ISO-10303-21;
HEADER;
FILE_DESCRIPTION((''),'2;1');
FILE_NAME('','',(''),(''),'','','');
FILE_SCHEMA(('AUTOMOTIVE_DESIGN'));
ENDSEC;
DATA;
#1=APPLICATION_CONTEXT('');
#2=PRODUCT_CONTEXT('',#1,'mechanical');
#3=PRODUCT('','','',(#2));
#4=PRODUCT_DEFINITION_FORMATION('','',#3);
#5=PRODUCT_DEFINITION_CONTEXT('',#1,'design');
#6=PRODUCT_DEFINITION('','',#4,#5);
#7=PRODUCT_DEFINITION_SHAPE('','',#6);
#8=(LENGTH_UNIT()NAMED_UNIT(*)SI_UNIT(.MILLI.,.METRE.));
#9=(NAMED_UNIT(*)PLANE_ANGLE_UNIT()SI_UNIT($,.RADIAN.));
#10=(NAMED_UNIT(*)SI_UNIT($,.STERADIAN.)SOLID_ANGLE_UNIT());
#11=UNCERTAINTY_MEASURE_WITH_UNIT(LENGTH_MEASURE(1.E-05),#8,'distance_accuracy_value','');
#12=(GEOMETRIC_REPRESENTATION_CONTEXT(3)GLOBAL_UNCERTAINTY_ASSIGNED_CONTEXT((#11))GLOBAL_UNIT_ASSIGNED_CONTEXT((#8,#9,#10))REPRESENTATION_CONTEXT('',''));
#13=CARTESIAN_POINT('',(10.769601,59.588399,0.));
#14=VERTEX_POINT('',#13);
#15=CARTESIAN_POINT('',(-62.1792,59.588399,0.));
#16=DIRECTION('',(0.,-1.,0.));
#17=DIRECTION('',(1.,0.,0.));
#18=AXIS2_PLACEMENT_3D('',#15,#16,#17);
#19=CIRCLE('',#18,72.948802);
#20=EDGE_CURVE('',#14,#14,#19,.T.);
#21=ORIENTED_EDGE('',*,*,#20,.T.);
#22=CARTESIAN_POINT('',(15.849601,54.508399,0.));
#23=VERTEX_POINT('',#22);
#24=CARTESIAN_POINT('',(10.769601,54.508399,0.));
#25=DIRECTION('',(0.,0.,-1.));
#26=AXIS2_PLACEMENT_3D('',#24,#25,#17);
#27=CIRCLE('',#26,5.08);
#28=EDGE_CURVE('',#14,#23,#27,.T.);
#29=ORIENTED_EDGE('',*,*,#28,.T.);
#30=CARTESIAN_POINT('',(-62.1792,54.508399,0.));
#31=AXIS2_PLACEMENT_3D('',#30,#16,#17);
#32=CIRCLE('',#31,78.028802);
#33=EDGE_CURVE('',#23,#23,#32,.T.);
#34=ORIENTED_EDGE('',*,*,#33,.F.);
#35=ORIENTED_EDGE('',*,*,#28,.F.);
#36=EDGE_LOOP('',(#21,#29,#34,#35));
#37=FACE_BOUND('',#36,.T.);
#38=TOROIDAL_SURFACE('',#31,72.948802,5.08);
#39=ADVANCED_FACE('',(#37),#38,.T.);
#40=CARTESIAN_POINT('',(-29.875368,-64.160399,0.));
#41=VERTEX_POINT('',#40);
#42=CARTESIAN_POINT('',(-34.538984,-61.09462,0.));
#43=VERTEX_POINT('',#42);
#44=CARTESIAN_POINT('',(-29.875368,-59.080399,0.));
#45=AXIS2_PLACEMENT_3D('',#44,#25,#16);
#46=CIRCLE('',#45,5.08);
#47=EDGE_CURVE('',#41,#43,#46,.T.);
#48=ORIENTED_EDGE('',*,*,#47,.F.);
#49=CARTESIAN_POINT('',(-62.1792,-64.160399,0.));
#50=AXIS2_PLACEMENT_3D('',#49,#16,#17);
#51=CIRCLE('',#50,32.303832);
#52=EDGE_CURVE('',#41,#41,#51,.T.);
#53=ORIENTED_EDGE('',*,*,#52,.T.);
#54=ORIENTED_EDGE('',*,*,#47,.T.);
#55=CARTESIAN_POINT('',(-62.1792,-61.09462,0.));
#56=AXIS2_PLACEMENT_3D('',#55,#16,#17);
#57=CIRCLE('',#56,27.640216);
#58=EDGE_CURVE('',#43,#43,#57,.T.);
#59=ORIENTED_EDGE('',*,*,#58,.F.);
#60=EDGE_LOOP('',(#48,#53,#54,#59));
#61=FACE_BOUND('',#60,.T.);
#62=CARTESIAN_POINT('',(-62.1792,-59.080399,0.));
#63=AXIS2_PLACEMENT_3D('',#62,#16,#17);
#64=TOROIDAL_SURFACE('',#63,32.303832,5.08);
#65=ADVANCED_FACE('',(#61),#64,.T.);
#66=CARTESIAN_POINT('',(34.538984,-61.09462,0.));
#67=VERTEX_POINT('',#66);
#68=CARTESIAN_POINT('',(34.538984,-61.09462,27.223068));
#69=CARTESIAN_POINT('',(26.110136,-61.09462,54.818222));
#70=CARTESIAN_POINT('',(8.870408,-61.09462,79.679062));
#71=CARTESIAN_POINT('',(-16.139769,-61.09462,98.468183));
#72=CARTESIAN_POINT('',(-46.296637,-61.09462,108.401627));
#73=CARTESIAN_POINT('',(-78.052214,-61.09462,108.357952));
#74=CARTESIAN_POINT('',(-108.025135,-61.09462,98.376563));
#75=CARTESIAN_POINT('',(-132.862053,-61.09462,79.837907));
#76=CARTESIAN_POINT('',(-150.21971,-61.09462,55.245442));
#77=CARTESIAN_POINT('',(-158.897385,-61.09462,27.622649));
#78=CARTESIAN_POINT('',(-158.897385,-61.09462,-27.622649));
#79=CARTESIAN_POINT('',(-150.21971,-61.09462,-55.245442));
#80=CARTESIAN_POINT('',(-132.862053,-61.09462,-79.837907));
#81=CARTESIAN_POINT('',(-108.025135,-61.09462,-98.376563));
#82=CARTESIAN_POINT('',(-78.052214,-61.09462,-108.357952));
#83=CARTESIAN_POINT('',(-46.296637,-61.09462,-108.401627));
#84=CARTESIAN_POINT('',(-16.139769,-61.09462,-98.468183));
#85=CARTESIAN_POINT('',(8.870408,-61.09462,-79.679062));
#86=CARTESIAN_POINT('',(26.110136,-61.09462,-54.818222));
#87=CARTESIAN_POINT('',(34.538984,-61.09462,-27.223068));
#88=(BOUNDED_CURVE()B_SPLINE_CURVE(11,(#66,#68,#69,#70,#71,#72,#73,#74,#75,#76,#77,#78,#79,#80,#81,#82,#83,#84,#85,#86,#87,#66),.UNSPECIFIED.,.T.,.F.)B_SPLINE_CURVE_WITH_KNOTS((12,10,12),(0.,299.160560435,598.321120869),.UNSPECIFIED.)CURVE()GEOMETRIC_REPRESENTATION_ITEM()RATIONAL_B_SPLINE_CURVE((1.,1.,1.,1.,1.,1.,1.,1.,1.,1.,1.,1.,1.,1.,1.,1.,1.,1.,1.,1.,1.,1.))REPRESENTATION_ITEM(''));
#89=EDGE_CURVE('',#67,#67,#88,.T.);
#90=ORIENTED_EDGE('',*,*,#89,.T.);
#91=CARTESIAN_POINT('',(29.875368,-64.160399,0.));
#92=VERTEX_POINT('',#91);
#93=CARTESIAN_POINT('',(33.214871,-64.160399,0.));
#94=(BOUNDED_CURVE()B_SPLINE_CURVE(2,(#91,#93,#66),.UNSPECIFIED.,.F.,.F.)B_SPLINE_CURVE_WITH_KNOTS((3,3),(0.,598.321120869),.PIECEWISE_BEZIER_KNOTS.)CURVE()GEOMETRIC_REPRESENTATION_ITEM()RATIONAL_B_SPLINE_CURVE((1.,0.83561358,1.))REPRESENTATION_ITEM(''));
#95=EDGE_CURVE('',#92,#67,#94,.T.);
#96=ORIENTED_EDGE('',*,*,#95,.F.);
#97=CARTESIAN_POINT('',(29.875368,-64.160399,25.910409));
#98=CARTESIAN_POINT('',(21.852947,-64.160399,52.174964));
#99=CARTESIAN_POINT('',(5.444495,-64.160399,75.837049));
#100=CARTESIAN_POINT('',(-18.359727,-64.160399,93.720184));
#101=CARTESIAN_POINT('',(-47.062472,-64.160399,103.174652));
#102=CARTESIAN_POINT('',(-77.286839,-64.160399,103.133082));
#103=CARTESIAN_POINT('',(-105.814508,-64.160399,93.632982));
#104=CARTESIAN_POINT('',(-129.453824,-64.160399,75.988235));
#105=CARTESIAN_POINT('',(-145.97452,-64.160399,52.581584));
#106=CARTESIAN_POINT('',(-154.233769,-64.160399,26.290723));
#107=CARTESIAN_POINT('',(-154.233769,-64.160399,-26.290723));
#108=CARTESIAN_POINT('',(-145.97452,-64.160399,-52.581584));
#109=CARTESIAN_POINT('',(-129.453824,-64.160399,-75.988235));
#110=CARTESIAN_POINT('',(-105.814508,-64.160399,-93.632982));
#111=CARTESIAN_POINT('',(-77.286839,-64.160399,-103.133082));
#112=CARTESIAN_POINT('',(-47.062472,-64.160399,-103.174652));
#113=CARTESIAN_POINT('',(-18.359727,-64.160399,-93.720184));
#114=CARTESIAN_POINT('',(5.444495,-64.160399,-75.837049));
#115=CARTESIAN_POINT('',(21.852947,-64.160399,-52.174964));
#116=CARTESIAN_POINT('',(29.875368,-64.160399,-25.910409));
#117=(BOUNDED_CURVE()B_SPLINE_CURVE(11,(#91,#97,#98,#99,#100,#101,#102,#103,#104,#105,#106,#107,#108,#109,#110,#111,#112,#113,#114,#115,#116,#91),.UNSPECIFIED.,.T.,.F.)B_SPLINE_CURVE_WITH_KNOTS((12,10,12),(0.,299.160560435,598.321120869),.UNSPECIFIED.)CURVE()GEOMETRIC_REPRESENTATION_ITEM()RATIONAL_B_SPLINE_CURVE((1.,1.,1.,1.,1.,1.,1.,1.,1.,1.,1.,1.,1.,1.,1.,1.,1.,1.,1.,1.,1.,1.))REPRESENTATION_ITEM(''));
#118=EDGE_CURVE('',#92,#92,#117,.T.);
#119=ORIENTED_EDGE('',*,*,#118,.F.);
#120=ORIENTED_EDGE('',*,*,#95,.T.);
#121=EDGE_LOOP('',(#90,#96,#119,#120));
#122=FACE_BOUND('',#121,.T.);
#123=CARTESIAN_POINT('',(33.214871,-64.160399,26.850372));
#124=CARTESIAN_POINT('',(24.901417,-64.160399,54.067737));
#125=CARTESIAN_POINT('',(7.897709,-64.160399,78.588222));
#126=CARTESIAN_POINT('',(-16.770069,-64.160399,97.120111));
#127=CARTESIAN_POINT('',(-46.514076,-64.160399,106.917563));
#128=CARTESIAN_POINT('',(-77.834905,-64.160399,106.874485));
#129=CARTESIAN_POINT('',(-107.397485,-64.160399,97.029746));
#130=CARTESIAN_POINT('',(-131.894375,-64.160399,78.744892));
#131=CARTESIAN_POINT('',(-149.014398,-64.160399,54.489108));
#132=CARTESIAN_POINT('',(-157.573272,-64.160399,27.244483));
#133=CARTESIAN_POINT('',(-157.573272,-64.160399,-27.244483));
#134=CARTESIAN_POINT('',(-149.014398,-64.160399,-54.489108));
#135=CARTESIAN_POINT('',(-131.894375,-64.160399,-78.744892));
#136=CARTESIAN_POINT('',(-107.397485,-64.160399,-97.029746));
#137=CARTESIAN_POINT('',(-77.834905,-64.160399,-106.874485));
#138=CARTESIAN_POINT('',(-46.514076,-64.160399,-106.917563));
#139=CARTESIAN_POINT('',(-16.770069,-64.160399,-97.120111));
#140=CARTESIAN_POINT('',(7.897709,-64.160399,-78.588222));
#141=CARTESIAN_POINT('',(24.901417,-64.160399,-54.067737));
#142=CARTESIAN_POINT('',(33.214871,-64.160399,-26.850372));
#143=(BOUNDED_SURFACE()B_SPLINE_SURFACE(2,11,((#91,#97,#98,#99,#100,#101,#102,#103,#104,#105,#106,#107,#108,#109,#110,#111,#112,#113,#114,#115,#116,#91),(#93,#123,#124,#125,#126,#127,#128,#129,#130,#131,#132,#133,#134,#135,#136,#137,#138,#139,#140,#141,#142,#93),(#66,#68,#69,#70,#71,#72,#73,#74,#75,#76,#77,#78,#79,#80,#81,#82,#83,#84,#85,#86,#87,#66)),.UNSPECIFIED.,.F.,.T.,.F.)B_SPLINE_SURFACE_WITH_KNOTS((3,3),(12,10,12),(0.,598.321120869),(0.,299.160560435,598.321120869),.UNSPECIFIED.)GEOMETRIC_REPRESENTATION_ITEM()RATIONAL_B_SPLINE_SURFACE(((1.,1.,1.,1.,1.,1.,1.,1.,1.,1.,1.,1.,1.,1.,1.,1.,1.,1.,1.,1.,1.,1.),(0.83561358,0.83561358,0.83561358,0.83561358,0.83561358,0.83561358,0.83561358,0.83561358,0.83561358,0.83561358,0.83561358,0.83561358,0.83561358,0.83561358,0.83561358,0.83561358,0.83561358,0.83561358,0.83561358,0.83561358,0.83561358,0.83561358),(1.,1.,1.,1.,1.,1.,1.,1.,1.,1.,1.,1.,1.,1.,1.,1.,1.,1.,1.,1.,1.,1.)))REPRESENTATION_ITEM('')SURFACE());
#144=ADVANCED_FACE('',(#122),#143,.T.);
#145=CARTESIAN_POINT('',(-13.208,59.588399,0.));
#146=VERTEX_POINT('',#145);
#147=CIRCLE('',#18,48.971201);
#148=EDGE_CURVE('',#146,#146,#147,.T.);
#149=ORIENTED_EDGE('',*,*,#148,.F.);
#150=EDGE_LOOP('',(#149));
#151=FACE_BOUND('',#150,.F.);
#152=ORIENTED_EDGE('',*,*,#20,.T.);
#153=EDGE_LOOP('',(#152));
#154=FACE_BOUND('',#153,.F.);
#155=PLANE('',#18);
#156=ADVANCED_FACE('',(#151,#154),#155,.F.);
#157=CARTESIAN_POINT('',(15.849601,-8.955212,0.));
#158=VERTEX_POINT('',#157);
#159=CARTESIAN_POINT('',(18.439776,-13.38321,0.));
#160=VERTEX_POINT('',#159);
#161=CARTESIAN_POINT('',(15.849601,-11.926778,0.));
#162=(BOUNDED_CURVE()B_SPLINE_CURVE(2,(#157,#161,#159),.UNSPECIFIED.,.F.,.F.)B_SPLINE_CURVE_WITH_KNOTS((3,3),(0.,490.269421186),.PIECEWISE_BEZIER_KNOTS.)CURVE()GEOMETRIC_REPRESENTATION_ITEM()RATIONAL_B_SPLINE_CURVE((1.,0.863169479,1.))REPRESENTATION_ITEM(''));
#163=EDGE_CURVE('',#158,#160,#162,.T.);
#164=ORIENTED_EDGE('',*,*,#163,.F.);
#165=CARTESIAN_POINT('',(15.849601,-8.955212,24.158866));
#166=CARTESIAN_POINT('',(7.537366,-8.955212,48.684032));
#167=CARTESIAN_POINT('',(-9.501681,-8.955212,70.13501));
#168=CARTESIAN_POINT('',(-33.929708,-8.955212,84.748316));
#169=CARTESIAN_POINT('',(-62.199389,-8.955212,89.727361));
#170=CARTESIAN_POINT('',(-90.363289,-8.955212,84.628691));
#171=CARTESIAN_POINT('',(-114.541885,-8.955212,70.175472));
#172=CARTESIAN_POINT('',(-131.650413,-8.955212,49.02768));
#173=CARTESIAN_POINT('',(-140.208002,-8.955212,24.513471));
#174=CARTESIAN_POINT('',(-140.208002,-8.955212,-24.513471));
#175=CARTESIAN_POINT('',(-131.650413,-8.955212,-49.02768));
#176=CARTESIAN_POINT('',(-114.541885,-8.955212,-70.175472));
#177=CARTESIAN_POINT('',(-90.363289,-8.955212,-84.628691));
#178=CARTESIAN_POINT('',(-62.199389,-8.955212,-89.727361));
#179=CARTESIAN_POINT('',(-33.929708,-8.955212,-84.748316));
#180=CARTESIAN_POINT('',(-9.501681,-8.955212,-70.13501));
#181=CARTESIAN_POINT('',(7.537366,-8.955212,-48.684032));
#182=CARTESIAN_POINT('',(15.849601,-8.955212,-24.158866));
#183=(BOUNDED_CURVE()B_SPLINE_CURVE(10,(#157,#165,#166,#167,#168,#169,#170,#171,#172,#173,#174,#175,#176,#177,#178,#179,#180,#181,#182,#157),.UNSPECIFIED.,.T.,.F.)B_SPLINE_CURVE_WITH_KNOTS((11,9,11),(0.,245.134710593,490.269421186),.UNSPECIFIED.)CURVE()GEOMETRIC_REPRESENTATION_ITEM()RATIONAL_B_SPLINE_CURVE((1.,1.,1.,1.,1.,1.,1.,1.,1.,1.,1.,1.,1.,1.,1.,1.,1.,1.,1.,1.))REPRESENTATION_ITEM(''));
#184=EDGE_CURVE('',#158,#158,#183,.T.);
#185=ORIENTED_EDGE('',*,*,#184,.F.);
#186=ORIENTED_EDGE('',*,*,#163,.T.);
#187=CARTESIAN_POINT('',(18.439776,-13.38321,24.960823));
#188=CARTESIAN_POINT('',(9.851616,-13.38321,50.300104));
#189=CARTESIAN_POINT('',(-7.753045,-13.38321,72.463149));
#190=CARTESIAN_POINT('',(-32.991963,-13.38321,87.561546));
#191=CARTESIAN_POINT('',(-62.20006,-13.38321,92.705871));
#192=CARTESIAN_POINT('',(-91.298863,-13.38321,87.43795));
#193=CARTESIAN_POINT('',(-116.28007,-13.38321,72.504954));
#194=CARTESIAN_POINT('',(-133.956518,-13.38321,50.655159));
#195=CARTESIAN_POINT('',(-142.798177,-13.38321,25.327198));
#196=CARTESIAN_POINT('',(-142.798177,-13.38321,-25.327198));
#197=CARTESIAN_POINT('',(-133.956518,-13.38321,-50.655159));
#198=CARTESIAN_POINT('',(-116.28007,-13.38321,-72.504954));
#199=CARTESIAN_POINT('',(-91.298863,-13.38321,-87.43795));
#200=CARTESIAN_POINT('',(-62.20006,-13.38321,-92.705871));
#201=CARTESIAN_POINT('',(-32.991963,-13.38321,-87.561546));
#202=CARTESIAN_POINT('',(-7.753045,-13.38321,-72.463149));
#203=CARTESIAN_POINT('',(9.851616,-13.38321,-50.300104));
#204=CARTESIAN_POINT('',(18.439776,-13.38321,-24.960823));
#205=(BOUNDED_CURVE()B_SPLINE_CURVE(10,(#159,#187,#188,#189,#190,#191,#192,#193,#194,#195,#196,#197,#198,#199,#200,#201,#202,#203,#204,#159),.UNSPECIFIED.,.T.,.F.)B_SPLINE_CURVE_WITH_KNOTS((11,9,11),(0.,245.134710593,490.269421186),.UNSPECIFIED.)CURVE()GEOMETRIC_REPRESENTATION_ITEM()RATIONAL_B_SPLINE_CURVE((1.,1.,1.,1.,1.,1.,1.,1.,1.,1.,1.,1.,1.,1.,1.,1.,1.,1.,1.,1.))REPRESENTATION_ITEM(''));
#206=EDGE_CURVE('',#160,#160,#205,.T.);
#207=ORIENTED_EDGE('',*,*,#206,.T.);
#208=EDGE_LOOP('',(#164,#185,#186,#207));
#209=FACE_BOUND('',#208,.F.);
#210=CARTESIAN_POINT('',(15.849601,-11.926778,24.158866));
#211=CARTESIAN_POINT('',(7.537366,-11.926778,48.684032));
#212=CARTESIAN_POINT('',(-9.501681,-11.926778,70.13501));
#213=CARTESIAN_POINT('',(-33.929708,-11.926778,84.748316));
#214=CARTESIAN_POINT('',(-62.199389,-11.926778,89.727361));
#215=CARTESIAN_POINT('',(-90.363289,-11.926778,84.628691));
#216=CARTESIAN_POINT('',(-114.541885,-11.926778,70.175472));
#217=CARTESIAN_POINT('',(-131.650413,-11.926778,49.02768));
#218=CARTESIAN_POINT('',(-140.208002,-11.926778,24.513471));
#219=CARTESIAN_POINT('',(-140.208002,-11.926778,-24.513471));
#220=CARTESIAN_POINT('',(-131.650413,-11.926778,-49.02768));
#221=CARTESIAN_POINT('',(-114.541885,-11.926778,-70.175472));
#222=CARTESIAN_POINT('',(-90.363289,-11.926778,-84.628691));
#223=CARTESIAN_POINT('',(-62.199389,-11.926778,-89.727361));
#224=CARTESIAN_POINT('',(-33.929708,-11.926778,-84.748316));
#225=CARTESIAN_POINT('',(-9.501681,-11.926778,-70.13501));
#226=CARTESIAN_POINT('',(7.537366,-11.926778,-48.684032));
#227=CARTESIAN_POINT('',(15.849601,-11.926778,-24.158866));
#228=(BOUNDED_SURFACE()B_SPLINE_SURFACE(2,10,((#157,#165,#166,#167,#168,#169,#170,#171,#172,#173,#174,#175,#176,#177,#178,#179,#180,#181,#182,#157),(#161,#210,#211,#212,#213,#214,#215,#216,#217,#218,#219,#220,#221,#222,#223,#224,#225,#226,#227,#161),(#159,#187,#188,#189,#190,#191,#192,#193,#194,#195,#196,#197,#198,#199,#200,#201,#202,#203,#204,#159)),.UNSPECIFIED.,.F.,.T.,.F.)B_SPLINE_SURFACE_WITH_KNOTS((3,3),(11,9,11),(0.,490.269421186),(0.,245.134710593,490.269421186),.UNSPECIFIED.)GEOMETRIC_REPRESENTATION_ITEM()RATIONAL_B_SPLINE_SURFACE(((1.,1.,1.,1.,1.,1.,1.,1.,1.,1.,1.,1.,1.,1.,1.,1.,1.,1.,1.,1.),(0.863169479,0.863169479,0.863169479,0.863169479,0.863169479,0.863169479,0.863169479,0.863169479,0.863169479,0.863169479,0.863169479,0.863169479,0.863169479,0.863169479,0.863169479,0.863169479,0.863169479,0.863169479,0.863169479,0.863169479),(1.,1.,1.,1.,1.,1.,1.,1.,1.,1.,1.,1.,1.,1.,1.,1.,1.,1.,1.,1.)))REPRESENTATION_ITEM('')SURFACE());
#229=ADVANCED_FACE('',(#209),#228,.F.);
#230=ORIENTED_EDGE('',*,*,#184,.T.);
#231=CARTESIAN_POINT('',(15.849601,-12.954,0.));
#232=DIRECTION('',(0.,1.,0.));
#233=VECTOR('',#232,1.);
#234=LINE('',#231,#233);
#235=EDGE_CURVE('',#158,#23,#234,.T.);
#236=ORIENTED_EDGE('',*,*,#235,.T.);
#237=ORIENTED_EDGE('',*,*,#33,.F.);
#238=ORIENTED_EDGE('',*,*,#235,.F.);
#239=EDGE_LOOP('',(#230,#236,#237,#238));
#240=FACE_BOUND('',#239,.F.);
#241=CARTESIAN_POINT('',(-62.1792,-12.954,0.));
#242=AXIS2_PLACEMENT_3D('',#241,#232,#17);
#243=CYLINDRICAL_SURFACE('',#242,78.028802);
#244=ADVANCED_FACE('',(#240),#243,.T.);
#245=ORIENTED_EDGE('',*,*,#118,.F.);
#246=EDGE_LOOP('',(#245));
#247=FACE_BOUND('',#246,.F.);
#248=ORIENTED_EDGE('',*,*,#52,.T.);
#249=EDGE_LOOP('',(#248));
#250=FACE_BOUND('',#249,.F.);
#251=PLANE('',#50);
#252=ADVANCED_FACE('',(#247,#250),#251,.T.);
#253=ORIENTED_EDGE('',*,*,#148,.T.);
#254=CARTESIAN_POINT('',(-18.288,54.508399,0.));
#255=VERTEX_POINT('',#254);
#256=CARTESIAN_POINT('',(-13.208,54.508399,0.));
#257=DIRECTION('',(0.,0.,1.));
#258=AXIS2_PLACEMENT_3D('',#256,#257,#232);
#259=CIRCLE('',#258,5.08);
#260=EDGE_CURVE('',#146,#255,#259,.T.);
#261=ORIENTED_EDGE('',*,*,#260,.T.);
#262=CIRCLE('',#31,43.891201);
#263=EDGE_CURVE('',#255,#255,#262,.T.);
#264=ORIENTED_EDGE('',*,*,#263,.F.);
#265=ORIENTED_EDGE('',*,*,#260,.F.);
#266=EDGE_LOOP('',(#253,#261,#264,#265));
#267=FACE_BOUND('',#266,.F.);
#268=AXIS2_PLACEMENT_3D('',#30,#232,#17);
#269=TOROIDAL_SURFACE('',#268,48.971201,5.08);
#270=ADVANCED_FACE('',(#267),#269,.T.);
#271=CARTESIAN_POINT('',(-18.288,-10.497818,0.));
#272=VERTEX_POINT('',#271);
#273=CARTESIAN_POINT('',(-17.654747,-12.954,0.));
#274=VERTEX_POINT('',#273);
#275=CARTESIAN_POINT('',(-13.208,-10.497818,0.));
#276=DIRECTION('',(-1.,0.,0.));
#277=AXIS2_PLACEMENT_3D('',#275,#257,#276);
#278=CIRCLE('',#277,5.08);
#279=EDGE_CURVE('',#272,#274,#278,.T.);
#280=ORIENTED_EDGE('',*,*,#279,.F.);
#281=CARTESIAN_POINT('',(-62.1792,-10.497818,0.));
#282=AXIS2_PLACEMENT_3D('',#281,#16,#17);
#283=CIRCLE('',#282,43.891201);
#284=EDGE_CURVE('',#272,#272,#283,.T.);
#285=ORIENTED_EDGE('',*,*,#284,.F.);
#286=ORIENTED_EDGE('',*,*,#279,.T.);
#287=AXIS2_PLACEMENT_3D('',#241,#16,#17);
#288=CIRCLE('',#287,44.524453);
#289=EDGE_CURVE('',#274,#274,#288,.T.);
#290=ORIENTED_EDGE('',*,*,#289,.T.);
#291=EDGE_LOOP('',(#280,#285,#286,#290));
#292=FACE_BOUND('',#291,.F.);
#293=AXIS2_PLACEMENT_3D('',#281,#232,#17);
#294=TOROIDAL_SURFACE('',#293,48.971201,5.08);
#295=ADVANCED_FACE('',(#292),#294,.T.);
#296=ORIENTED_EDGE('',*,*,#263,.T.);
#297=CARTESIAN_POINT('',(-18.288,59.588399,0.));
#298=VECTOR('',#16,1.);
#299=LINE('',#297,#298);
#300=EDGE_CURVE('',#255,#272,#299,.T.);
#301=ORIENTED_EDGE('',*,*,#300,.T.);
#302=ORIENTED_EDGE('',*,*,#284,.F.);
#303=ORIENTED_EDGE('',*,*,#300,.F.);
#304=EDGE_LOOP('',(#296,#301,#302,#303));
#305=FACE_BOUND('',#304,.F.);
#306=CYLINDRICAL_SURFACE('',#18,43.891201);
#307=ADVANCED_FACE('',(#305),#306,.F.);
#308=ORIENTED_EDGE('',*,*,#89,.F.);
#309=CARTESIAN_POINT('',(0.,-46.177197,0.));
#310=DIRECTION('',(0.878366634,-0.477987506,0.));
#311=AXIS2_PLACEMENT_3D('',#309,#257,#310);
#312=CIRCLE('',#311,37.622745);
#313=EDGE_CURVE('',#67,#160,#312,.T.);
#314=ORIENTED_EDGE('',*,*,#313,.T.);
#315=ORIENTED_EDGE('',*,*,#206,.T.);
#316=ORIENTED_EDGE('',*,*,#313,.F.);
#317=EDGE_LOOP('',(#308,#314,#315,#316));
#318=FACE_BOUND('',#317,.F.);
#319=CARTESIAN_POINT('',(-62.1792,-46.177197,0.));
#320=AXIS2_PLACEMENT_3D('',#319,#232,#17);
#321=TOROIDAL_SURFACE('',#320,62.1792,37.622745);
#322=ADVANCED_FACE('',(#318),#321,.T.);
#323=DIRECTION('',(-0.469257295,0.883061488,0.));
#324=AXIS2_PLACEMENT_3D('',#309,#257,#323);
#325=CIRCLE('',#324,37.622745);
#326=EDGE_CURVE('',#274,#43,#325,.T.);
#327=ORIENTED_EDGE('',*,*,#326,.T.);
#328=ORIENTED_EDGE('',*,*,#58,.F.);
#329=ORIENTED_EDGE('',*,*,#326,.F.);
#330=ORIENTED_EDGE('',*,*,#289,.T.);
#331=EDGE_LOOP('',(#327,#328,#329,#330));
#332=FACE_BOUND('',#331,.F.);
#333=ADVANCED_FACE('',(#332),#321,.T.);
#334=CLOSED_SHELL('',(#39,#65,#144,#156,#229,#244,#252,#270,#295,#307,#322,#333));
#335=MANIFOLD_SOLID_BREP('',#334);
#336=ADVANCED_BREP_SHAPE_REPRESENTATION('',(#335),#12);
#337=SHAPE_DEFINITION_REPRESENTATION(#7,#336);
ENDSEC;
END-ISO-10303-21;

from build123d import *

# Parameters (mm, degrees)
F2_R = 5.08
F3_R = 5.08


# Not quite as in the source:
# - a fillet or chamfer that OpenCascade refuses, or shapes differently, is made with other operations: its cross-section is extruded or revolved along the edge and cut away or added


with BuildPart() as f1:
    # F0 (on Top) → F1 (revolve)
    with BuildSketch(Plane.XY):
        Polygon((15.8496014774, 59.5883987844), (-18.2879995555, 59.5883987844), (-18.2879995555, -12.9540003836), (-17.6547473952, -12.9540003836), (15.8496014774, -12.9540003836), (15.8496014774, -12.0559275107), align=None)
        with BuildLine():
            ThreePointArc((33.0465635914, -64.1603991389), (35.7271287753, -34.3855398181), (15.8496014774, -12.0559275107))
            Line((15.8496014774, -12.0559275107), (15.8496014774, -12.9540003836))
            Line((15.8496014774, -12.9540003836), (-17.6547473952, -12.9540003836))
            ThreePointArc((-17.6547473952, -12.9540003836), (-36.0302588433, -35.3470835296), (-33.0465635914, -64.1603991389))
            Line((-33.0465635914, -64.1603991389), (33.0465635914, -64.1603991389))
        make_face()
    revolve(axis=Axis((-62.1792003512, -0.6096027792, 0), (0, -1, 0)))

    # F2
    f2_edges = [f1.edges().sort_by_distance(p)[0] for p in [
        (-157.404964, -64.160399, 0),
        (-140.208002, 59.588399, 0),
    ]]
    fillet(f2_edges, radius=F2_R)

    # F3
    f3_edges = [f1.edges().sort_by_distance(p)[0] for p in [
        (-140.208002, -12.055928, 0),
    ]]
    fillet(f3_edges, radius=F3_R)

    # F4: fillet of radius 5.08 on 3 edges, made by hand

    # F4_s1 → F4_t2 (revolve, cut)
    with BuildSketch(Plane.XY):
        with BuildLine():
            ThreePointArc((-13.2079995555, 59.5883987844), (-16.8001020039, 58.1005012328), (-18.2879995555, 54.5083987844))
            Line((-18.2879995555, 54.5083987844), (-18.2879995555, 59.5883987844))
            Line((-18.2879995555, 59.5883987844), (-13.2079995555, 59.5883987844))
        make_face()
    revolve(axis=Axis((-62.1792003512, 59.5883987844, 0), (0, -1, 0)), mode=Mode.SUBTRACT)

    # F4_s3 → F4_t4 (revolve, cut)
    with BuildSketch(Plane.XY):
        with BuildLine():
            ThreePointArc((-18.2879995555, -10.4978176442), (-18.1271396747, -11.7660686), (-17.6547473952, -12.9540003836))
            Line((-17.6547473952, -12.9540003836), (-18.2879995555, -12.9540003836))
            Line((-18.2879995555, -12.9540003836), (-18.2879995555, -10.4978176442))
        make_face()
    revolve(axis=Axis((-62.1792003512, -12.9540003836, 0), (0, -1, 0)), mode=Mode.SUBTRACT)

    # F4_s5 → F4_t6 (revolve, cut)
    with BuildSketch(Plane.XY):
        with BuildLine():
            ThreePointArc((-29.8753679594, -64.1603991389), (-32.6659019153, -63.3253161277), (-34.5389840999, -61.0946197064))
            ThreePointArc((-34.5389840999, -61.0946197064), (-33.8275230407, -62.6444253203), (-33.0465635914, -64.1603991389))
            Line((-33.0465635914, -64.1603991389), (-29.8753679594, -64.1603991389))
        make_face()
    revolve(axis=Axis((-62.1792003512, -64.1603991389, 0), (0, -1, 0)), mode=Mode.SUBTRACT)


solid = f1.part
